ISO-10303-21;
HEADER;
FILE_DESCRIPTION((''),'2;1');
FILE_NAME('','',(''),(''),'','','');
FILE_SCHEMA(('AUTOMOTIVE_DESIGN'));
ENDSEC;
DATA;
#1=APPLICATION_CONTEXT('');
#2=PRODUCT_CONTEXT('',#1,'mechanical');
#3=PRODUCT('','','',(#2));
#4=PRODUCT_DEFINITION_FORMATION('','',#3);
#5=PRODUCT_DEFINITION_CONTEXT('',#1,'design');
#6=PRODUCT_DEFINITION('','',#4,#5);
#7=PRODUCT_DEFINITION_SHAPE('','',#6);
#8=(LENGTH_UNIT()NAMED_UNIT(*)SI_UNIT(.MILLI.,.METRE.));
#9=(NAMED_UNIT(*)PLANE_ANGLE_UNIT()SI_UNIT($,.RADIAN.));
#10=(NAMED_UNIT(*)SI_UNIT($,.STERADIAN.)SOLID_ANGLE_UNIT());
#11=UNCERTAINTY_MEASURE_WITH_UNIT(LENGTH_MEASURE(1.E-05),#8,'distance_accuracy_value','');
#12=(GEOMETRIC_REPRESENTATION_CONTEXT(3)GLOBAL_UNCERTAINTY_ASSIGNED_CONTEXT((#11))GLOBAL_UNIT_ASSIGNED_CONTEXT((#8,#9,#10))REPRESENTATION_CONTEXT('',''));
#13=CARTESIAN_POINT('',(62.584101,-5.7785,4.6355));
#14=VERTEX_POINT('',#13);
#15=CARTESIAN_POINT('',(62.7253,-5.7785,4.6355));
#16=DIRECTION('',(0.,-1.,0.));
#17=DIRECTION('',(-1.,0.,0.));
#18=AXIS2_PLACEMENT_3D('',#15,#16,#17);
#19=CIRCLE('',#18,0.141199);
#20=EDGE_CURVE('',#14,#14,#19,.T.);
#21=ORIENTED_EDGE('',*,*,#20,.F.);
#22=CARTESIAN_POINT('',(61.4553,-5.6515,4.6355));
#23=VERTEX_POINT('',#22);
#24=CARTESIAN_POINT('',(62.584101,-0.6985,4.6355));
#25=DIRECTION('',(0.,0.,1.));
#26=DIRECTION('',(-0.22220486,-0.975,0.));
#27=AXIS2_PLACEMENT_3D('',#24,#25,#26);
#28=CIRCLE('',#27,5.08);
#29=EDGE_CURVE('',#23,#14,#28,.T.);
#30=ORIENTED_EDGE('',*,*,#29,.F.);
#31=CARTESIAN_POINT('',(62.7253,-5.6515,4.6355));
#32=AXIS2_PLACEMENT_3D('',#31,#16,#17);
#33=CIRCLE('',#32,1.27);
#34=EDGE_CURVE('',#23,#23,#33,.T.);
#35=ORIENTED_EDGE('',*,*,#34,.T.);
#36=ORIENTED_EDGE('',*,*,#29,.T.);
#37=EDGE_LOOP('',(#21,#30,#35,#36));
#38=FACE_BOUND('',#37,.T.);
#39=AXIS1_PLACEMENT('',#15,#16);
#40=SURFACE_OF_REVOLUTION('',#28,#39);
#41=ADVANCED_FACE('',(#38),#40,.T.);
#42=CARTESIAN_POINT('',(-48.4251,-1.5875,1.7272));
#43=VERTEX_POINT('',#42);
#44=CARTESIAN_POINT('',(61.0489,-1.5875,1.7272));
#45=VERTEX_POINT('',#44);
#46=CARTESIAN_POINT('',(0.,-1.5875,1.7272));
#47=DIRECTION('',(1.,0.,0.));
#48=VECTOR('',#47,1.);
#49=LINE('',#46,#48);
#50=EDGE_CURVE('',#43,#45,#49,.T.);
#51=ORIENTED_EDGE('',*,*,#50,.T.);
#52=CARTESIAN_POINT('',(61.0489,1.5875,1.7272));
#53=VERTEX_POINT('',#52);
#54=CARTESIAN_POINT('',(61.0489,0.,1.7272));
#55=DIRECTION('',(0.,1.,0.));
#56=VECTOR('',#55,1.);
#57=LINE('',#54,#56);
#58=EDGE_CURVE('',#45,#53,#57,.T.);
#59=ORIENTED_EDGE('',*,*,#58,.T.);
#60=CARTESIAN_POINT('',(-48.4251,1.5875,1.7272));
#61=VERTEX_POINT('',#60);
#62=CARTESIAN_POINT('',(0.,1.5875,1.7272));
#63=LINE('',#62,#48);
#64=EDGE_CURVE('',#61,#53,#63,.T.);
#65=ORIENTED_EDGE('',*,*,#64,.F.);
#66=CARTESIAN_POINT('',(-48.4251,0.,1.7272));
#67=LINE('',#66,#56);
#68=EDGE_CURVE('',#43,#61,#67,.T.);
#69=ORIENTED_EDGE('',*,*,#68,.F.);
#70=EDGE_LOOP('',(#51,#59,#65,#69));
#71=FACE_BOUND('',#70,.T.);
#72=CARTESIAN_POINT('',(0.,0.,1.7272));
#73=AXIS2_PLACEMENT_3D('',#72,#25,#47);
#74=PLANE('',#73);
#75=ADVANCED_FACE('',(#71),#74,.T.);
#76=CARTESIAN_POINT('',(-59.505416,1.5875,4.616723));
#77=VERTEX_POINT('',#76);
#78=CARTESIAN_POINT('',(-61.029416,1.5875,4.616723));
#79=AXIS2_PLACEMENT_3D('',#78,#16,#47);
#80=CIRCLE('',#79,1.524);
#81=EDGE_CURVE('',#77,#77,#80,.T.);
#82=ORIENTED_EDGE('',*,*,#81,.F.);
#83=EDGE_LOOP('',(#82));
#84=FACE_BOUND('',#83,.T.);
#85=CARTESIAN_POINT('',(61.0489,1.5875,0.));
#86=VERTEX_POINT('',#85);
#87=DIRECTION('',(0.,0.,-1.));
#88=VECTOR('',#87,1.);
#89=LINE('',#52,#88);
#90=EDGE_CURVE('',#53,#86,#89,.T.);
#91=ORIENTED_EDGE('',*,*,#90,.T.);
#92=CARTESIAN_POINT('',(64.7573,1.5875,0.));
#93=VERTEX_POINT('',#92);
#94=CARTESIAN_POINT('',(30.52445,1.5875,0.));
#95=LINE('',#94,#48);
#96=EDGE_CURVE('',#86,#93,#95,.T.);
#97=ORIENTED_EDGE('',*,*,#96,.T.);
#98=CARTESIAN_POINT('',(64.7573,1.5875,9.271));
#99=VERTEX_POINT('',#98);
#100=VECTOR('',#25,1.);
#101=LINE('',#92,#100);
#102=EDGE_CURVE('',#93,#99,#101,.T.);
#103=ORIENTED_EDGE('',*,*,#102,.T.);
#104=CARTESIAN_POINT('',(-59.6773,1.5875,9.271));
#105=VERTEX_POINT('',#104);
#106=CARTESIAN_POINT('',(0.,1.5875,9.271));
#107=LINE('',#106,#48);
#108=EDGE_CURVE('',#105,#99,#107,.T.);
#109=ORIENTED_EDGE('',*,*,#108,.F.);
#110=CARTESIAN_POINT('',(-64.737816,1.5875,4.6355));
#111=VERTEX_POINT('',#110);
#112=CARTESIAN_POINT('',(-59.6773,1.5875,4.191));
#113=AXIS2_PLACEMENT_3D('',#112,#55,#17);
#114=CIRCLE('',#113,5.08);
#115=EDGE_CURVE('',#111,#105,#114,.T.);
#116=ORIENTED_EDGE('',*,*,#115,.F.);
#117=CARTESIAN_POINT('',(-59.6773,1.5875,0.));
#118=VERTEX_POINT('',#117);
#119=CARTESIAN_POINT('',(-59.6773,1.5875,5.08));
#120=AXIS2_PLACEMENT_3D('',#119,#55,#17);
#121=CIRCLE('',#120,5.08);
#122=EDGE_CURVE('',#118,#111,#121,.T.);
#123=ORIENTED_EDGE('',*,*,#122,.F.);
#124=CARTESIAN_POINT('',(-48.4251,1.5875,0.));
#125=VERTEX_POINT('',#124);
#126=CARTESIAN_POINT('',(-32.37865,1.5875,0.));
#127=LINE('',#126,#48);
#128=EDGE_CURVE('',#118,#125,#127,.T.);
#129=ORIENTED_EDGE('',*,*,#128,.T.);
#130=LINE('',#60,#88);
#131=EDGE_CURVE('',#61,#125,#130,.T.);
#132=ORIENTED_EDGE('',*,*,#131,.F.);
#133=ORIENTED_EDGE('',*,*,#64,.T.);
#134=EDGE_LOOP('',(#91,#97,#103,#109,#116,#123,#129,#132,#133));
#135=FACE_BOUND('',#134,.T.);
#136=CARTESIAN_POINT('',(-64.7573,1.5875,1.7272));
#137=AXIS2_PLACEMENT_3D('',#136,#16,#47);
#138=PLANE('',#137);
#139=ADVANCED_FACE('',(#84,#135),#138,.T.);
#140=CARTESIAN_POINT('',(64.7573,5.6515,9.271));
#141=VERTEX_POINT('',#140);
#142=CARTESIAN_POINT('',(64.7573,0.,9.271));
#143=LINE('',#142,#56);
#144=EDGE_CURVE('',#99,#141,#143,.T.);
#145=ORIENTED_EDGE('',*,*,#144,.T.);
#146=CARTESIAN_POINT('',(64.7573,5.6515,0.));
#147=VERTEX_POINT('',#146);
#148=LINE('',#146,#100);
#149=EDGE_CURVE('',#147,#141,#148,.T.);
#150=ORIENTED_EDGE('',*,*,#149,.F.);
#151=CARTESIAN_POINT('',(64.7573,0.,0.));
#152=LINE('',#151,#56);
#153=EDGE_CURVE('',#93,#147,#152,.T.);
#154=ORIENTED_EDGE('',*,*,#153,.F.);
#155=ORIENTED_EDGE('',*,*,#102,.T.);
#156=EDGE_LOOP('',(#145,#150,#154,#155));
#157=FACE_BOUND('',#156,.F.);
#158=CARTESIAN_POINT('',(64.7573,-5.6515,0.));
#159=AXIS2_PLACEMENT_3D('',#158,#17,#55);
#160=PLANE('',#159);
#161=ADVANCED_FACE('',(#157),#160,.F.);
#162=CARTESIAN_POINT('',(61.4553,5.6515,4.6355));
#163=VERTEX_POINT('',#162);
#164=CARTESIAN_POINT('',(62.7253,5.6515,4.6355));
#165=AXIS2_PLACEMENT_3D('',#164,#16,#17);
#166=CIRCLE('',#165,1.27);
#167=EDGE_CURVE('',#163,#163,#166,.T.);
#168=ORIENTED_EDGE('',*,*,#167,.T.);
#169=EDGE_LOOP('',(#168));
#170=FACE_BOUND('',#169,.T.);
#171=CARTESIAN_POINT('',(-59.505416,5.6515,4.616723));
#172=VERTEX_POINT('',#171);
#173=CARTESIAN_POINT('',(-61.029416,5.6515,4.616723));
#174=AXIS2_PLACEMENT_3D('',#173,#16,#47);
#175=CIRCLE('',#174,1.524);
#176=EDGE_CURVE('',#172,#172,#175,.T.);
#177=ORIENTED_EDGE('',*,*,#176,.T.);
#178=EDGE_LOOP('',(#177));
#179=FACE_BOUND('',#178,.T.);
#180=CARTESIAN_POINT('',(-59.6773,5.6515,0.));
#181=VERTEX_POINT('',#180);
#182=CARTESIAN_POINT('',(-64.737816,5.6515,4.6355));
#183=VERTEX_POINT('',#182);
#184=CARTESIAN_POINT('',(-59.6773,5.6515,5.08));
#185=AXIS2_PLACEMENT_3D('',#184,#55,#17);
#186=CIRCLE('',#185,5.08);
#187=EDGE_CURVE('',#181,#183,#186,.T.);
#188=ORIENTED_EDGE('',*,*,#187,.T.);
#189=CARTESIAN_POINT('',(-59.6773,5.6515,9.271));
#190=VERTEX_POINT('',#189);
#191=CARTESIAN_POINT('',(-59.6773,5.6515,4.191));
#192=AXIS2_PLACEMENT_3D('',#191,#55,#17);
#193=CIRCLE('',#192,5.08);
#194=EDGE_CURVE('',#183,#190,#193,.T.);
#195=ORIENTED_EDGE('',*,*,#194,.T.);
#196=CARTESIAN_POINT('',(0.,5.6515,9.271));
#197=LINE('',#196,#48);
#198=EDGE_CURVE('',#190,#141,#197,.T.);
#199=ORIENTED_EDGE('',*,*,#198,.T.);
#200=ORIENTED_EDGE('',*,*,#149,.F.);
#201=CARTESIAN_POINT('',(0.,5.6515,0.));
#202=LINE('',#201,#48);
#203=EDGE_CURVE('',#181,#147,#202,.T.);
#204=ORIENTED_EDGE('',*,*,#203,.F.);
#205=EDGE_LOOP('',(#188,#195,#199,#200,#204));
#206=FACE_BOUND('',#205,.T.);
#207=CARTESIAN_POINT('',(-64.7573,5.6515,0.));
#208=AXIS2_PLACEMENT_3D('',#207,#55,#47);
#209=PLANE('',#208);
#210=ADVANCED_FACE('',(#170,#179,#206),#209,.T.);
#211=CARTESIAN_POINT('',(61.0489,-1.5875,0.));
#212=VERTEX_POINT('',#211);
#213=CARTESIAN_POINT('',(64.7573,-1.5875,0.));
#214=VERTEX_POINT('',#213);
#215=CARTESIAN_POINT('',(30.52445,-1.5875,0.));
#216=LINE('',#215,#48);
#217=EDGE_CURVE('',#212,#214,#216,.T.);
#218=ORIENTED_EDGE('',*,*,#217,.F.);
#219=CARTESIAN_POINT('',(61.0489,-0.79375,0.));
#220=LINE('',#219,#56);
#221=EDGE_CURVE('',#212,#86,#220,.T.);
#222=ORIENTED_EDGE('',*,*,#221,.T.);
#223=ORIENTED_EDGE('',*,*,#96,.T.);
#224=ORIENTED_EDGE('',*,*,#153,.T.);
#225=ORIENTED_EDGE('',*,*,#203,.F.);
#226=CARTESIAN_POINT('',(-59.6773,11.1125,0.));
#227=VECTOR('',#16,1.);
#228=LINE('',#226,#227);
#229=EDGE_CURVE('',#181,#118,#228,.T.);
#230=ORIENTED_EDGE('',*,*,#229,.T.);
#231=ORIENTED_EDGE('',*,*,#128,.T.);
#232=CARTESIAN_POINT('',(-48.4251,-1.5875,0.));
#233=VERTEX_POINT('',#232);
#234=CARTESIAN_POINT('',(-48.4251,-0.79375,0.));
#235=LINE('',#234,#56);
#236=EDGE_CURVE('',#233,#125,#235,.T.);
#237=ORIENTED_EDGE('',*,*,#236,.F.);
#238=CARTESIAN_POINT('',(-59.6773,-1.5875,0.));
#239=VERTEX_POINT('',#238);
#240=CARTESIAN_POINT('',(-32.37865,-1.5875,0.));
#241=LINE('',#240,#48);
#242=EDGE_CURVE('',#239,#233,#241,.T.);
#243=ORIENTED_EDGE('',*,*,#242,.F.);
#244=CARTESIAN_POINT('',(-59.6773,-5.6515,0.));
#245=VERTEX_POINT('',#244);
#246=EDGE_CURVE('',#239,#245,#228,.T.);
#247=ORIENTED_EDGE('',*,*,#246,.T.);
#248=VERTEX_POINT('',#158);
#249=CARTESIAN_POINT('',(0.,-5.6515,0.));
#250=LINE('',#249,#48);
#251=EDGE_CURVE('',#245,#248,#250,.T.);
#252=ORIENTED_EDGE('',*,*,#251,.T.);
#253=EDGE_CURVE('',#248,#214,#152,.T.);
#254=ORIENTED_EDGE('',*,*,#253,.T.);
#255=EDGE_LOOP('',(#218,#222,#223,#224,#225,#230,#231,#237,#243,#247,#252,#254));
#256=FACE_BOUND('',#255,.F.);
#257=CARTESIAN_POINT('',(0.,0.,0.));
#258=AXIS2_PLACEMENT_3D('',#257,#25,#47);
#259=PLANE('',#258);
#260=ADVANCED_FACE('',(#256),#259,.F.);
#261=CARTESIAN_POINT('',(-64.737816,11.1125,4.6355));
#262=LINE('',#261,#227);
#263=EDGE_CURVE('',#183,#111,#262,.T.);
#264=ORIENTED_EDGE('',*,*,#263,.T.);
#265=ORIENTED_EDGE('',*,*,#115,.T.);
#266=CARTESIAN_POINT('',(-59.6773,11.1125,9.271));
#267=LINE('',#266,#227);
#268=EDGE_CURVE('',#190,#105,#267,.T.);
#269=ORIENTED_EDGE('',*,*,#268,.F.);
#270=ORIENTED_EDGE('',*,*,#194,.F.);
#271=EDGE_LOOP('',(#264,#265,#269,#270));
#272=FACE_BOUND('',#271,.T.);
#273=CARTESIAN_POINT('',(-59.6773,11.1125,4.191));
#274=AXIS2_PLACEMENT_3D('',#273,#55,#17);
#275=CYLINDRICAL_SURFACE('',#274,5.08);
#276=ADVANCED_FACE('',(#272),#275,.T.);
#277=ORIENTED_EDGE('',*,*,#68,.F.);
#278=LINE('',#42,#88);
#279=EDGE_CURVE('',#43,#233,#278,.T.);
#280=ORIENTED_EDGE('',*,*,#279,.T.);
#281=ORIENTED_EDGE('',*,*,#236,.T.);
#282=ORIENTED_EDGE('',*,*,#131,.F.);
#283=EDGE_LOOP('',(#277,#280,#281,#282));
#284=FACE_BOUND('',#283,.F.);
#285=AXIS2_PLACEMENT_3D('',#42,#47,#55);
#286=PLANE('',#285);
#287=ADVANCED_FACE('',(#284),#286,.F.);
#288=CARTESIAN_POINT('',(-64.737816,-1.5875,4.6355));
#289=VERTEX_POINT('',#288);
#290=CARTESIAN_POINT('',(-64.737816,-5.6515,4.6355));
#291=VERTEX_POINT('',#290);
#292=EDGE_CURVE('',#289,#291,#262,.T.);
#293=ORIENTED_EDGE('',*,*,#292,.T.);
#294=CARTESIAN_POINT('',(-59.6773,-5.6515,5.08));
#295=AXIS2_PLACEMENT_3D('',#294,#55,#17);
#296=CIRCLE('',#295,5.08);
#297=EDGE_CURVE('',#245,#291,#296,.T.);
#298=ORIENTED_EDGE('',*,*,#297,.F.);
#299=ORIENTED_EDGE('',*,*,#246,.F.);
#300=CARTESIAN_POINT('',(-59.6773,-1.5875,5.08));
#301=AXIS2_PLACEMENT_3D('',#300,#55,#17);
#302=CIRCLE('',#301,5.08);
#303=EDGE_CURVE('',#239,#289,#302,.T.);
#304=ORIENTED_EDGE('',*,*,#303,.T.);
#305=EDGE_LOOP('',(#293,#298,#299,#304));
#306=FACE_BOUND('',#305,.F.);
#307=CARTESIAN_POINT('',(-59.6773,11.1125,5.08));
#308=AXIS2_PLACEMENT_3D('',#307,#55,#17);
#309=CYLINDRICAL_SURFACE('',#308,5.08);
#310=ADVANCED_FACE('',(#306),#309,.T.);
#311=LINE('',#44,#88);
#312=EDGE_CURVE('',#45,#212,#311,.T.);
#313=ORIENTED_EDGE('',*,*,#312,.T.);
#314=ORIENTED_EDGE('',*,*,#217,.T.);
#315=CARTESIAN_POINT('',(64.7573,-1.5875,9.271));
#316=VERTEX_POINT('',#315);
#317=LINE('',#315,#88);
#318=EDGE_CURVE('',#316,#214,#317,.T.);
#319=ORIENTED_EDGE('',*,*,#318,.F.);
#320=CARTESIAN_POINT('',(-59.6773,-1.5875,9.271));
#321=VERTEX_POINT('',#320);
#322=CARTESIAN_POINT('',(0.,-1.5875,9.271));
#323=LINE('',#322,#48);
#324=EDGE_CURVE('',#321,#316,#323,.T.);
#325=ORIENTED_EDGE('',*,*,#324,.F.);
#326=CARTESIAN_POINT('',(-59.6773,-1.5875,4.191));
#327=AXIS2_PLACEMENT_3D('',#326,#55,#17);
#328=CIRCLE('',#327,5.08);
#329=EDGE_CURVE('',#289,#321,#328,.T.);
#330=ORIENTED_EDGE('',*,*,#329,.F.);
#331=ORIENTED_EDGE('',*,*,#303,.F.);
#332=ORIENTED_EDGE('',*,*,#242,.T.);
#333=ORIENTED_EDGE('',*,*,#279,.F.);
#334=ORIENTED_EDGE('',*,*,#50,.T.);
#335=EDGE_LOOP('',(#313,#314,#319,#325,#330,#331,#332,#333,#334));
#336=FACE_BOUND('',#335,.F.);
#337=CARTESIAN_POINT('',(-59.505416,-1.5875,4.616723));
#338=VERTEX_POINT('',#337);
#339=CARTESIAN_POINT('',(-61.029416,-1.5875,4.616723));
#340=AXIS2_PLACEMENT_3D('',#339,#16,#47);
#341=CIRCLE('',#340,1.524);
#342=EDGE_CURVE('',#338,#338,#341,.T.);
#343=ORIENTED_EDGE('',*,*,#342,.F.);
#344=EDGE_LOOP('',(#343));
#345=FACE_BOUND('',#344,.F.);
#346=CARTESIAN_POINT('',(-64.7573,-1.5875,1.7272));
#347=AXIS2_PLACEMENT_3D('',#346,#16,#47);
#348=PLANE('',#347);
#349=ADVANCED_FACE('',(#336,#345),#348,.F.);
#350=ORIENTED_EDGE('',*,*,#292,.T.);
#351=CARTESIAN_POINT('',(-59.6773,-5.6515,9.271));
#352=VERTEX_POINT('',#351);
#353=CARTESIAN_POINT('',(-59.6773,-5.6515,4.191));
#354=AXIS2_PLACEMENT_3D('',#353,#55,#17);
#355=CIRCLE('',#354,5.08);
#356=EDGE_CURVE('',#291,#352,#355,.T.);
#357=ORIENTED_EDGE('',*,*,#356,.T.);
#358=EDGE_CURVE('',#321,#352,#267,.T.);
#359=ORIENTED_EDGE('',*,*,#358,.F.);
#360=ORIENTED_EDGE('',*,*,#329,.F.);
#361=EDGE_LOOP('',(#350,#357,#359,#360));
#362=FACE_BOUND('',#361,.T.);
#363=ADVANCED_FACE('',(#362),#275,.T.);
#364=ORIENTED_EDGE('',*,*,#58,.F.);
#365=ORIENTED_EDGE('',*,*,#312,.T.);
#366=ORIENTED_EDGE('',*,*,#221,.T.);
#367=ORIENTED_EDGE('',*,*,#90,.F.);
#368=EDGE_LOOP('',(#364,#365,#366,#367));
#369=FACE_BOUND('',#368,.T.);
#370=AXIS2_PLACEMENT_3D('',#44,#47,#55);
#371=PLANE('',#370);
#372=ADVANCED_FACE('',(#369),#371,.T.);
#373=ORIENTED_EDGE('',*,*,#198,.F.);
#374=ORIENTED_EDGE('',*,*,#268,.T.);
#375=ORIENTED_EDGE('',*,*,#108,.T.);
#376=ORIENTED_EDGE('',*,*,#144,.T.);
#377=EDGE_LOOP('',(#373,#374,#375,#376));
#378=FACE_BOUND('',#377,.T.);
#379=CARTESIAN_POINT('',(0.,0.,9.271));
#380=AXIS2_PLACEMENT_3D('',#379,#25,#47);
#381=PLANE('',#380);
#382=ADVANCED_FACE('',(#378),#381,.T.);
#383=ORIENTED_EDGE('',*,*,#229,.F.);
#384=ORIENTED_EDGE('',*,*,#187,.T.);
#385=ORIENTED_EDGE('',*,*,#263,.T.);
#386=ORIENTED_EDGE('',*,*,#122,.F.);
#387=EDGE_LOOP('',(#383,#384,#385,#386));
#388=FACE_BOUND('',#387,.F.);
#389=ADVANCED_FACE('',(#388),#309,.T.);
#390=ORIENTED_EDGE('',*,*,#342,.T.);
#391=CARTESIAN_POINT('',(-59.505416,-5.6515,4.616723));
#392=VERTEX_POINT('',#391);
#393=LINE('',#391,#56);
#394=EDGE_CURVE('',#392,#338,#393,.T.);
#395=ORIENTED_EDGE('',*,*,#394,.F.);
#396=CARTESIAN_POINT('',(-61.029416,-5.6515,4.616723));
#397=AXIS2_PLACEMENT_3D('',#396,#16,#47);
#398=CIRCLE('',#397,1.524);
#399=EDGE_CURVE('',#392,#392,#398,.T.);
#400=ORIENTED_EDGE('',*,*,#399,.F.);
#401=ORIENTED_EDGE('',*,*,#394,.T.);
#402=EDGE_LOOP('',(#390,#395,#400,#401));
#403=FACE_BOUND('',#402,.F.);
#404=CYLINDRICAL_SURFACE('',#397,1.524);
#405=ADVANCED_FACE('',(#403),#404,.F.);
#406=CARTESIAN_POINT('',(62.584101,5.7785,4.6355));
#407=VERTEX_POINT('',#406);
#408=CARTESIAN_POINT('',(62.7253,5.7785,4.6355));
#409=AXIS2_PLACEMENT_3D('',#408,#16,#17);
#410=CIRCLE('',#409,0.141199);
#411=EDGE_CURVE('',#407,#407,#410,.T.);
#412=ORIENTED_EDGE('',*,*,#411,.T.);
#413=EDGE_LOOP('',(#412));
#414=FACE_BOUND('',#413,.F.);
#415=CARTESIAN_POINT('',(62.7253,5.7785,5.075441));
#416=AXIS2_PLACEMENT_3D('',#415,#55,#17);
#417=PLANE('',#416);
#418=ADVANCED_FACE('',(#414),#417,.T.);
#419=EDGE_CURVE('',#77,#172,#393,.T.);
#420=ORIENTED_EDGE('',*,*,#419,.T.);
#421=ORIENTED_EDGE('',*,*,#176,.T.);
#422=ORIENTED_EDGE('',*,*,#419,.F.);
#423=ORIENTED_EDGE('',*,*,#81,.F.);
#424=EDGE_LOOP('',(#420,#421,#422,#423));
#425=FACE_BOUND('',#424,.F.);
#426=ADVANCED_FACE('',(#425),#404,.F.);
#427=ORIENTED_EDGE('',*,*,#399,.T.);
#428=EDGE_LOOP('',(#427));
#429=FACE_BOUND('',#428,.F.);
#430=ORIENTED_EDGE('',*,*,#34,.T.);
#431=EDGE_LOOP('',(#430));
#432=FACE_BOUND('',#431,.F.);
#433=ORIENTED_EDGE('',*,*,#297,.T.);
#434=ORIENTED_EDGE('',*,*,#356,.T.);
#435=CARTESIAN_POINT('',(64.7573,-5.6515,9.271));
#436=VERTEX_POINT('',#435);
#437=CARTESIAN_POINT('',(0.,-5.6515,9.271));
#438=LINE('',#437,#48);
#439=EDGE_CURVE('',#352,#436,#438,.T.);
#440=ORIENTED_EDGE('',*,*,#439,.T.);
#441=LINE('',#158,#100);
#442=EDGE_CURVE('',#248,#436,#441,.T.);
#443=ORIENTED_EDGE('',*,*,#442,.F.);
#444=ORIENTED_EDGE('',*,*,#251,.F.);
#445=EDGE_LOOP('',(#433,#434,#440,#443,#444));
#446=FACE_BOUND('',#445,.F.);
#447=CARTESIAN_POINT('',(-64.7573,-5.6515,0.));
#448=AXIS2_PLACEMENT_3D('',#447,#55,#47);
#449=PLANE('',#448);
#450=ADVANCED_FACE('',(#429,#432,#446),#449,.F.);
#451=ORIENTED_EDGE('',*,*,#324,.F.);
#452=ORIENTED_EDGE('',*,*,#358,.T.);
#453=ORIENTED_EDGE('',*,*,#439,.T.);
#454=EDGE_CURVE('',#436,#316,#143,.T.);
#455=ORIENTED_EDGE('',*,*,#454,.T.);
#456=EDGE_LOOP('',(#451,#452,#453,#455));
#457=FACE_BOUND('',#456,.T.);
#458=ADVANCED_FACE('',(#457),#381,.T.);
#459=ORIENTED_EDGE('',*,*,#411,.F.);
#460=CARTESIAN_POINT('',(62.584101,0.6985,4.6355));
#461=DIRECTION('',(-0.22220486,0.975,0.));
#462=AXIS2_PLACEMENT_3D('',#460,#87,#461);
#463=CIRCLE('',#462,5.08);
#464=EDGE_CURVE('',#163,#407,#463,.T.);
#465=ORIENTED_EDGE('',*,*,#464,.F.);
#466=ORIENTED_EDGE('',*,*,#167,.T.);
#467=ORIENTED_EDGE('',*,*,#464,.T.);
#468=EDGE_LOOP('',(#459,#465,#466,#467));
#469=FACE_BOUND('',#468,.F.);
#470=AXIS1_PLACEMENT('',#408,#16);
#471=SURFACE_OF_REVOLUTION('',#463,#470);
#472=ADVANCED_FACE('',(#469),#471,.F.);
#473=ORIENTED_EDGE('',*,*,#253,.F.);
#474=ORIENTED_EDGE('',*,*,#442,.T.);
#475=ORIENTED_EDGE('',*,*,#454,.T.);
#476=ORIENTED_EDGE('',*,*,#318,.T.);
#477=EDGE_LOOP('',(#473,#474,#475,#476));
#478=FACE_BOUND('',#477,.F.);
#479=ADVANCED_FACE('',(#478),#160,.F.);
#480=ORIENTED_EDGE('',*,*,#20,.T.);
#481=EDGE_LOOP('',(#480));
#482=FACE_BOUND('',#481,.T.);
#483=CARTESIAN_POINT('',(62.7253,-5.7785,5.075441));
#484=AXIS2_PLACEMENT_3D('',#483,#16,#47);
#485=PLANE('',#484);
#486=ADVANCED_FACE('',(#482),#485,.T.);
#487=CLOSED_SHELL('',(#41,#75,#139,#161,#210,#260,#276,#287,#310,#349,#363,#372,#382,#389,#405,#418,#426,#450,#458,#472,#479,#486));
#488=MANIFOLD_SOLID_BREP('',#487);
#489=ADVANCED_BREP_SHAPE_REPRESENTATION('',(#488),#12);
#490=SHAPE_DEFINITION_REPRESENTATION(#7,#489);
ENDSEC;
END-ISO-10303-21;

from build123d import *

# Parameters (mm, degrees)
F0_W        = 129.5146
F0_H        = 11.303
F1_DEPTH    = 9.271
F2_W        = 206.3660303733
F2_H        = 3.175
F3_DEPTH    = 7.5438
F4_W        = 3.7084
F4_H        = 3.175
F5_DEPTH    = 25.4
F6_W        = 16.3322
F6_H        = 3.175
F7_DEPTH    = 25.4
F8_T1_DEPTH = 29.464
F8_T3_DEPTH = 29.464
F9_R        = 1.524
F10_DEPTH   = 25.4
F12_DEPTH   = 0.127


# Not quite as in the source:
# - a fillet or chamfer that OpenCascade refuses, or shapes differently, is made with other operations: its cross-section is extruded or revolved along the edge and cut away or added


with BuildPart() as f1:
    # F0 (on Top) → F1 (new body)
    with BuildSketch(Plane.XY):
        Rectangle(F0_W, F0_H)
    extrude(amount=F1_DEPTH)

    # F2 (on face) → F3 (cut)
    with BuildSketch(Plane.XY.offset(9.271)):
        Rectangle(F2_W, F2_H)
    extrude(amount=-F3_DEPTH, mode=Mode.SUBTRACT)

    # F4 (on face) → F5 (cut)
    with BuildSketch(Plane.XY.offset(1.7272)):
        with Locations((62.9031, 0)):
            Rectangle(F4_W, F4_H)
    extrude(amount=-F5_DEPTH, mode=Mode.SUBTRACT)

    # F6 (on face) → F7 (cut)
    with BuildSketch(Plane.XY.offset(1.7272)):
        with Locations((-56.5912, 0)):
            Rectangle(F6_W, F6_H)
    extrude(amount=-F7_DEPTH, mode=Mode.SUBTRACT)

    # F8: fillet of radius 5.08 on 4 edges, made by hand

    # F8_s2 → F8_t1 (cut)
    with BuildSketch(Plane.XZ.offset(-11.1125)):
        with BuildLine():
            ThreePointArc((-64.7573, 4.191), (-63.2694024484, 7.7831024484), (-59.6773, 9.271))
            Line((-59.6773, 9.271), (-64.7573, 9.271))
            Line((-64.7573, 9.271), (-64.7573, 4.191))
        make_face()
        with BuildLine():
            ThreePointArc((-64.7573, 5.08), (-63.2694024484, 1.4878975516), (-59.6773, 0))
            Line((-59.6773, 0), (-64.7573, 0))
            Line((-64.7573, 0), (-64.7573, 5.08))
        make_face()
    extrude(amount=F8_T1_DEPTH, mode=Mode.SUBTRACT)

    # F8_s4 → F8_t3 (cut)
    with BuildSketch(Plane.XZ.offset(-18.3515)):
        with BuildLine():
            ThreePointArc((-59.6773, 9.271), (-63.2694024484, 7.7831024484), (-64.7573, 4.191))
            Line((-64.7573, 4.191), (-64.7573, 9.271))
            Line((-64.7573, 9.271), (-59.6773, 9.271))
        make_face()
        with BuildLine():
            ThreePointArc((-64.7573, 5.08), (-63.2694024484, 1.4878975516), (-59.6773, 0))
            Line((-59.6773, 0), (-64.7573, 0))
            Line((-64.7573, 0), (-64.7573, 5.08))
        make_face()
    extrude(amount=F8_T3_DEPTH, mode=Mode.SUBTRACT)

    # F9 (on face) → F10 (cut)
    with BuildSketch(Plane.XZ.offset(5.6515)):
        with Locations((-61.0294157593, 4.6167229302)):
            Circle(F9_R)
    extrude(amount=-F10_DEPTH, mode=Mode.SUBTRACT)

    # F11 (on face) → F12 (join)
    with BuildSketch(Plane.XZ.offset(5.6515)):
        with BuildLine():
            Line((61.4553, 4.6355), (63.9953, 4.6355))
            ThreePointArc((63.9953, 4.6355), (62.7253, 5.9055), (61.4553, 4.6355))
        make_face()
        with BuildLine():
            ThreePointArc((61.4553, 4.6355), (62.7253, 3.3655), (63.9953, 4.6355))
            Line((63.9953, 4.6355), (61.4553, 4.6355))
        make_face()
    extrude(amount=F12_DEPTH)

    # F13: fillet of radius 5.08 on 1 edges, made by hand

    # F13_s1 → F13_t2 (revolve, cut)
    with BuildSketch(Plane.XY.offset(4.6355)):
        with BuildLine():
            ThreePointArc((61.4553, -5.6515), (62.0161394247, -5.7466501562), (62.584100691, -5.7785))
            Line((62.584100691, -5.7785), (61.4553, -5.7785))
            Line((61.4553, -5.7785), (61.4553, -5.6515))
        make_face()
    revolve(axis=Axis((62.7253, -5.7785, 4.6355), (0, -1, 0)), mode=Mode.SUBTRACT)

    # F14: F1 across plane


with BuildPart() as f1_1:
    add(f1.part)
    add(f1.part.mirror(Plane.XZ))


solid = f1_1.part
